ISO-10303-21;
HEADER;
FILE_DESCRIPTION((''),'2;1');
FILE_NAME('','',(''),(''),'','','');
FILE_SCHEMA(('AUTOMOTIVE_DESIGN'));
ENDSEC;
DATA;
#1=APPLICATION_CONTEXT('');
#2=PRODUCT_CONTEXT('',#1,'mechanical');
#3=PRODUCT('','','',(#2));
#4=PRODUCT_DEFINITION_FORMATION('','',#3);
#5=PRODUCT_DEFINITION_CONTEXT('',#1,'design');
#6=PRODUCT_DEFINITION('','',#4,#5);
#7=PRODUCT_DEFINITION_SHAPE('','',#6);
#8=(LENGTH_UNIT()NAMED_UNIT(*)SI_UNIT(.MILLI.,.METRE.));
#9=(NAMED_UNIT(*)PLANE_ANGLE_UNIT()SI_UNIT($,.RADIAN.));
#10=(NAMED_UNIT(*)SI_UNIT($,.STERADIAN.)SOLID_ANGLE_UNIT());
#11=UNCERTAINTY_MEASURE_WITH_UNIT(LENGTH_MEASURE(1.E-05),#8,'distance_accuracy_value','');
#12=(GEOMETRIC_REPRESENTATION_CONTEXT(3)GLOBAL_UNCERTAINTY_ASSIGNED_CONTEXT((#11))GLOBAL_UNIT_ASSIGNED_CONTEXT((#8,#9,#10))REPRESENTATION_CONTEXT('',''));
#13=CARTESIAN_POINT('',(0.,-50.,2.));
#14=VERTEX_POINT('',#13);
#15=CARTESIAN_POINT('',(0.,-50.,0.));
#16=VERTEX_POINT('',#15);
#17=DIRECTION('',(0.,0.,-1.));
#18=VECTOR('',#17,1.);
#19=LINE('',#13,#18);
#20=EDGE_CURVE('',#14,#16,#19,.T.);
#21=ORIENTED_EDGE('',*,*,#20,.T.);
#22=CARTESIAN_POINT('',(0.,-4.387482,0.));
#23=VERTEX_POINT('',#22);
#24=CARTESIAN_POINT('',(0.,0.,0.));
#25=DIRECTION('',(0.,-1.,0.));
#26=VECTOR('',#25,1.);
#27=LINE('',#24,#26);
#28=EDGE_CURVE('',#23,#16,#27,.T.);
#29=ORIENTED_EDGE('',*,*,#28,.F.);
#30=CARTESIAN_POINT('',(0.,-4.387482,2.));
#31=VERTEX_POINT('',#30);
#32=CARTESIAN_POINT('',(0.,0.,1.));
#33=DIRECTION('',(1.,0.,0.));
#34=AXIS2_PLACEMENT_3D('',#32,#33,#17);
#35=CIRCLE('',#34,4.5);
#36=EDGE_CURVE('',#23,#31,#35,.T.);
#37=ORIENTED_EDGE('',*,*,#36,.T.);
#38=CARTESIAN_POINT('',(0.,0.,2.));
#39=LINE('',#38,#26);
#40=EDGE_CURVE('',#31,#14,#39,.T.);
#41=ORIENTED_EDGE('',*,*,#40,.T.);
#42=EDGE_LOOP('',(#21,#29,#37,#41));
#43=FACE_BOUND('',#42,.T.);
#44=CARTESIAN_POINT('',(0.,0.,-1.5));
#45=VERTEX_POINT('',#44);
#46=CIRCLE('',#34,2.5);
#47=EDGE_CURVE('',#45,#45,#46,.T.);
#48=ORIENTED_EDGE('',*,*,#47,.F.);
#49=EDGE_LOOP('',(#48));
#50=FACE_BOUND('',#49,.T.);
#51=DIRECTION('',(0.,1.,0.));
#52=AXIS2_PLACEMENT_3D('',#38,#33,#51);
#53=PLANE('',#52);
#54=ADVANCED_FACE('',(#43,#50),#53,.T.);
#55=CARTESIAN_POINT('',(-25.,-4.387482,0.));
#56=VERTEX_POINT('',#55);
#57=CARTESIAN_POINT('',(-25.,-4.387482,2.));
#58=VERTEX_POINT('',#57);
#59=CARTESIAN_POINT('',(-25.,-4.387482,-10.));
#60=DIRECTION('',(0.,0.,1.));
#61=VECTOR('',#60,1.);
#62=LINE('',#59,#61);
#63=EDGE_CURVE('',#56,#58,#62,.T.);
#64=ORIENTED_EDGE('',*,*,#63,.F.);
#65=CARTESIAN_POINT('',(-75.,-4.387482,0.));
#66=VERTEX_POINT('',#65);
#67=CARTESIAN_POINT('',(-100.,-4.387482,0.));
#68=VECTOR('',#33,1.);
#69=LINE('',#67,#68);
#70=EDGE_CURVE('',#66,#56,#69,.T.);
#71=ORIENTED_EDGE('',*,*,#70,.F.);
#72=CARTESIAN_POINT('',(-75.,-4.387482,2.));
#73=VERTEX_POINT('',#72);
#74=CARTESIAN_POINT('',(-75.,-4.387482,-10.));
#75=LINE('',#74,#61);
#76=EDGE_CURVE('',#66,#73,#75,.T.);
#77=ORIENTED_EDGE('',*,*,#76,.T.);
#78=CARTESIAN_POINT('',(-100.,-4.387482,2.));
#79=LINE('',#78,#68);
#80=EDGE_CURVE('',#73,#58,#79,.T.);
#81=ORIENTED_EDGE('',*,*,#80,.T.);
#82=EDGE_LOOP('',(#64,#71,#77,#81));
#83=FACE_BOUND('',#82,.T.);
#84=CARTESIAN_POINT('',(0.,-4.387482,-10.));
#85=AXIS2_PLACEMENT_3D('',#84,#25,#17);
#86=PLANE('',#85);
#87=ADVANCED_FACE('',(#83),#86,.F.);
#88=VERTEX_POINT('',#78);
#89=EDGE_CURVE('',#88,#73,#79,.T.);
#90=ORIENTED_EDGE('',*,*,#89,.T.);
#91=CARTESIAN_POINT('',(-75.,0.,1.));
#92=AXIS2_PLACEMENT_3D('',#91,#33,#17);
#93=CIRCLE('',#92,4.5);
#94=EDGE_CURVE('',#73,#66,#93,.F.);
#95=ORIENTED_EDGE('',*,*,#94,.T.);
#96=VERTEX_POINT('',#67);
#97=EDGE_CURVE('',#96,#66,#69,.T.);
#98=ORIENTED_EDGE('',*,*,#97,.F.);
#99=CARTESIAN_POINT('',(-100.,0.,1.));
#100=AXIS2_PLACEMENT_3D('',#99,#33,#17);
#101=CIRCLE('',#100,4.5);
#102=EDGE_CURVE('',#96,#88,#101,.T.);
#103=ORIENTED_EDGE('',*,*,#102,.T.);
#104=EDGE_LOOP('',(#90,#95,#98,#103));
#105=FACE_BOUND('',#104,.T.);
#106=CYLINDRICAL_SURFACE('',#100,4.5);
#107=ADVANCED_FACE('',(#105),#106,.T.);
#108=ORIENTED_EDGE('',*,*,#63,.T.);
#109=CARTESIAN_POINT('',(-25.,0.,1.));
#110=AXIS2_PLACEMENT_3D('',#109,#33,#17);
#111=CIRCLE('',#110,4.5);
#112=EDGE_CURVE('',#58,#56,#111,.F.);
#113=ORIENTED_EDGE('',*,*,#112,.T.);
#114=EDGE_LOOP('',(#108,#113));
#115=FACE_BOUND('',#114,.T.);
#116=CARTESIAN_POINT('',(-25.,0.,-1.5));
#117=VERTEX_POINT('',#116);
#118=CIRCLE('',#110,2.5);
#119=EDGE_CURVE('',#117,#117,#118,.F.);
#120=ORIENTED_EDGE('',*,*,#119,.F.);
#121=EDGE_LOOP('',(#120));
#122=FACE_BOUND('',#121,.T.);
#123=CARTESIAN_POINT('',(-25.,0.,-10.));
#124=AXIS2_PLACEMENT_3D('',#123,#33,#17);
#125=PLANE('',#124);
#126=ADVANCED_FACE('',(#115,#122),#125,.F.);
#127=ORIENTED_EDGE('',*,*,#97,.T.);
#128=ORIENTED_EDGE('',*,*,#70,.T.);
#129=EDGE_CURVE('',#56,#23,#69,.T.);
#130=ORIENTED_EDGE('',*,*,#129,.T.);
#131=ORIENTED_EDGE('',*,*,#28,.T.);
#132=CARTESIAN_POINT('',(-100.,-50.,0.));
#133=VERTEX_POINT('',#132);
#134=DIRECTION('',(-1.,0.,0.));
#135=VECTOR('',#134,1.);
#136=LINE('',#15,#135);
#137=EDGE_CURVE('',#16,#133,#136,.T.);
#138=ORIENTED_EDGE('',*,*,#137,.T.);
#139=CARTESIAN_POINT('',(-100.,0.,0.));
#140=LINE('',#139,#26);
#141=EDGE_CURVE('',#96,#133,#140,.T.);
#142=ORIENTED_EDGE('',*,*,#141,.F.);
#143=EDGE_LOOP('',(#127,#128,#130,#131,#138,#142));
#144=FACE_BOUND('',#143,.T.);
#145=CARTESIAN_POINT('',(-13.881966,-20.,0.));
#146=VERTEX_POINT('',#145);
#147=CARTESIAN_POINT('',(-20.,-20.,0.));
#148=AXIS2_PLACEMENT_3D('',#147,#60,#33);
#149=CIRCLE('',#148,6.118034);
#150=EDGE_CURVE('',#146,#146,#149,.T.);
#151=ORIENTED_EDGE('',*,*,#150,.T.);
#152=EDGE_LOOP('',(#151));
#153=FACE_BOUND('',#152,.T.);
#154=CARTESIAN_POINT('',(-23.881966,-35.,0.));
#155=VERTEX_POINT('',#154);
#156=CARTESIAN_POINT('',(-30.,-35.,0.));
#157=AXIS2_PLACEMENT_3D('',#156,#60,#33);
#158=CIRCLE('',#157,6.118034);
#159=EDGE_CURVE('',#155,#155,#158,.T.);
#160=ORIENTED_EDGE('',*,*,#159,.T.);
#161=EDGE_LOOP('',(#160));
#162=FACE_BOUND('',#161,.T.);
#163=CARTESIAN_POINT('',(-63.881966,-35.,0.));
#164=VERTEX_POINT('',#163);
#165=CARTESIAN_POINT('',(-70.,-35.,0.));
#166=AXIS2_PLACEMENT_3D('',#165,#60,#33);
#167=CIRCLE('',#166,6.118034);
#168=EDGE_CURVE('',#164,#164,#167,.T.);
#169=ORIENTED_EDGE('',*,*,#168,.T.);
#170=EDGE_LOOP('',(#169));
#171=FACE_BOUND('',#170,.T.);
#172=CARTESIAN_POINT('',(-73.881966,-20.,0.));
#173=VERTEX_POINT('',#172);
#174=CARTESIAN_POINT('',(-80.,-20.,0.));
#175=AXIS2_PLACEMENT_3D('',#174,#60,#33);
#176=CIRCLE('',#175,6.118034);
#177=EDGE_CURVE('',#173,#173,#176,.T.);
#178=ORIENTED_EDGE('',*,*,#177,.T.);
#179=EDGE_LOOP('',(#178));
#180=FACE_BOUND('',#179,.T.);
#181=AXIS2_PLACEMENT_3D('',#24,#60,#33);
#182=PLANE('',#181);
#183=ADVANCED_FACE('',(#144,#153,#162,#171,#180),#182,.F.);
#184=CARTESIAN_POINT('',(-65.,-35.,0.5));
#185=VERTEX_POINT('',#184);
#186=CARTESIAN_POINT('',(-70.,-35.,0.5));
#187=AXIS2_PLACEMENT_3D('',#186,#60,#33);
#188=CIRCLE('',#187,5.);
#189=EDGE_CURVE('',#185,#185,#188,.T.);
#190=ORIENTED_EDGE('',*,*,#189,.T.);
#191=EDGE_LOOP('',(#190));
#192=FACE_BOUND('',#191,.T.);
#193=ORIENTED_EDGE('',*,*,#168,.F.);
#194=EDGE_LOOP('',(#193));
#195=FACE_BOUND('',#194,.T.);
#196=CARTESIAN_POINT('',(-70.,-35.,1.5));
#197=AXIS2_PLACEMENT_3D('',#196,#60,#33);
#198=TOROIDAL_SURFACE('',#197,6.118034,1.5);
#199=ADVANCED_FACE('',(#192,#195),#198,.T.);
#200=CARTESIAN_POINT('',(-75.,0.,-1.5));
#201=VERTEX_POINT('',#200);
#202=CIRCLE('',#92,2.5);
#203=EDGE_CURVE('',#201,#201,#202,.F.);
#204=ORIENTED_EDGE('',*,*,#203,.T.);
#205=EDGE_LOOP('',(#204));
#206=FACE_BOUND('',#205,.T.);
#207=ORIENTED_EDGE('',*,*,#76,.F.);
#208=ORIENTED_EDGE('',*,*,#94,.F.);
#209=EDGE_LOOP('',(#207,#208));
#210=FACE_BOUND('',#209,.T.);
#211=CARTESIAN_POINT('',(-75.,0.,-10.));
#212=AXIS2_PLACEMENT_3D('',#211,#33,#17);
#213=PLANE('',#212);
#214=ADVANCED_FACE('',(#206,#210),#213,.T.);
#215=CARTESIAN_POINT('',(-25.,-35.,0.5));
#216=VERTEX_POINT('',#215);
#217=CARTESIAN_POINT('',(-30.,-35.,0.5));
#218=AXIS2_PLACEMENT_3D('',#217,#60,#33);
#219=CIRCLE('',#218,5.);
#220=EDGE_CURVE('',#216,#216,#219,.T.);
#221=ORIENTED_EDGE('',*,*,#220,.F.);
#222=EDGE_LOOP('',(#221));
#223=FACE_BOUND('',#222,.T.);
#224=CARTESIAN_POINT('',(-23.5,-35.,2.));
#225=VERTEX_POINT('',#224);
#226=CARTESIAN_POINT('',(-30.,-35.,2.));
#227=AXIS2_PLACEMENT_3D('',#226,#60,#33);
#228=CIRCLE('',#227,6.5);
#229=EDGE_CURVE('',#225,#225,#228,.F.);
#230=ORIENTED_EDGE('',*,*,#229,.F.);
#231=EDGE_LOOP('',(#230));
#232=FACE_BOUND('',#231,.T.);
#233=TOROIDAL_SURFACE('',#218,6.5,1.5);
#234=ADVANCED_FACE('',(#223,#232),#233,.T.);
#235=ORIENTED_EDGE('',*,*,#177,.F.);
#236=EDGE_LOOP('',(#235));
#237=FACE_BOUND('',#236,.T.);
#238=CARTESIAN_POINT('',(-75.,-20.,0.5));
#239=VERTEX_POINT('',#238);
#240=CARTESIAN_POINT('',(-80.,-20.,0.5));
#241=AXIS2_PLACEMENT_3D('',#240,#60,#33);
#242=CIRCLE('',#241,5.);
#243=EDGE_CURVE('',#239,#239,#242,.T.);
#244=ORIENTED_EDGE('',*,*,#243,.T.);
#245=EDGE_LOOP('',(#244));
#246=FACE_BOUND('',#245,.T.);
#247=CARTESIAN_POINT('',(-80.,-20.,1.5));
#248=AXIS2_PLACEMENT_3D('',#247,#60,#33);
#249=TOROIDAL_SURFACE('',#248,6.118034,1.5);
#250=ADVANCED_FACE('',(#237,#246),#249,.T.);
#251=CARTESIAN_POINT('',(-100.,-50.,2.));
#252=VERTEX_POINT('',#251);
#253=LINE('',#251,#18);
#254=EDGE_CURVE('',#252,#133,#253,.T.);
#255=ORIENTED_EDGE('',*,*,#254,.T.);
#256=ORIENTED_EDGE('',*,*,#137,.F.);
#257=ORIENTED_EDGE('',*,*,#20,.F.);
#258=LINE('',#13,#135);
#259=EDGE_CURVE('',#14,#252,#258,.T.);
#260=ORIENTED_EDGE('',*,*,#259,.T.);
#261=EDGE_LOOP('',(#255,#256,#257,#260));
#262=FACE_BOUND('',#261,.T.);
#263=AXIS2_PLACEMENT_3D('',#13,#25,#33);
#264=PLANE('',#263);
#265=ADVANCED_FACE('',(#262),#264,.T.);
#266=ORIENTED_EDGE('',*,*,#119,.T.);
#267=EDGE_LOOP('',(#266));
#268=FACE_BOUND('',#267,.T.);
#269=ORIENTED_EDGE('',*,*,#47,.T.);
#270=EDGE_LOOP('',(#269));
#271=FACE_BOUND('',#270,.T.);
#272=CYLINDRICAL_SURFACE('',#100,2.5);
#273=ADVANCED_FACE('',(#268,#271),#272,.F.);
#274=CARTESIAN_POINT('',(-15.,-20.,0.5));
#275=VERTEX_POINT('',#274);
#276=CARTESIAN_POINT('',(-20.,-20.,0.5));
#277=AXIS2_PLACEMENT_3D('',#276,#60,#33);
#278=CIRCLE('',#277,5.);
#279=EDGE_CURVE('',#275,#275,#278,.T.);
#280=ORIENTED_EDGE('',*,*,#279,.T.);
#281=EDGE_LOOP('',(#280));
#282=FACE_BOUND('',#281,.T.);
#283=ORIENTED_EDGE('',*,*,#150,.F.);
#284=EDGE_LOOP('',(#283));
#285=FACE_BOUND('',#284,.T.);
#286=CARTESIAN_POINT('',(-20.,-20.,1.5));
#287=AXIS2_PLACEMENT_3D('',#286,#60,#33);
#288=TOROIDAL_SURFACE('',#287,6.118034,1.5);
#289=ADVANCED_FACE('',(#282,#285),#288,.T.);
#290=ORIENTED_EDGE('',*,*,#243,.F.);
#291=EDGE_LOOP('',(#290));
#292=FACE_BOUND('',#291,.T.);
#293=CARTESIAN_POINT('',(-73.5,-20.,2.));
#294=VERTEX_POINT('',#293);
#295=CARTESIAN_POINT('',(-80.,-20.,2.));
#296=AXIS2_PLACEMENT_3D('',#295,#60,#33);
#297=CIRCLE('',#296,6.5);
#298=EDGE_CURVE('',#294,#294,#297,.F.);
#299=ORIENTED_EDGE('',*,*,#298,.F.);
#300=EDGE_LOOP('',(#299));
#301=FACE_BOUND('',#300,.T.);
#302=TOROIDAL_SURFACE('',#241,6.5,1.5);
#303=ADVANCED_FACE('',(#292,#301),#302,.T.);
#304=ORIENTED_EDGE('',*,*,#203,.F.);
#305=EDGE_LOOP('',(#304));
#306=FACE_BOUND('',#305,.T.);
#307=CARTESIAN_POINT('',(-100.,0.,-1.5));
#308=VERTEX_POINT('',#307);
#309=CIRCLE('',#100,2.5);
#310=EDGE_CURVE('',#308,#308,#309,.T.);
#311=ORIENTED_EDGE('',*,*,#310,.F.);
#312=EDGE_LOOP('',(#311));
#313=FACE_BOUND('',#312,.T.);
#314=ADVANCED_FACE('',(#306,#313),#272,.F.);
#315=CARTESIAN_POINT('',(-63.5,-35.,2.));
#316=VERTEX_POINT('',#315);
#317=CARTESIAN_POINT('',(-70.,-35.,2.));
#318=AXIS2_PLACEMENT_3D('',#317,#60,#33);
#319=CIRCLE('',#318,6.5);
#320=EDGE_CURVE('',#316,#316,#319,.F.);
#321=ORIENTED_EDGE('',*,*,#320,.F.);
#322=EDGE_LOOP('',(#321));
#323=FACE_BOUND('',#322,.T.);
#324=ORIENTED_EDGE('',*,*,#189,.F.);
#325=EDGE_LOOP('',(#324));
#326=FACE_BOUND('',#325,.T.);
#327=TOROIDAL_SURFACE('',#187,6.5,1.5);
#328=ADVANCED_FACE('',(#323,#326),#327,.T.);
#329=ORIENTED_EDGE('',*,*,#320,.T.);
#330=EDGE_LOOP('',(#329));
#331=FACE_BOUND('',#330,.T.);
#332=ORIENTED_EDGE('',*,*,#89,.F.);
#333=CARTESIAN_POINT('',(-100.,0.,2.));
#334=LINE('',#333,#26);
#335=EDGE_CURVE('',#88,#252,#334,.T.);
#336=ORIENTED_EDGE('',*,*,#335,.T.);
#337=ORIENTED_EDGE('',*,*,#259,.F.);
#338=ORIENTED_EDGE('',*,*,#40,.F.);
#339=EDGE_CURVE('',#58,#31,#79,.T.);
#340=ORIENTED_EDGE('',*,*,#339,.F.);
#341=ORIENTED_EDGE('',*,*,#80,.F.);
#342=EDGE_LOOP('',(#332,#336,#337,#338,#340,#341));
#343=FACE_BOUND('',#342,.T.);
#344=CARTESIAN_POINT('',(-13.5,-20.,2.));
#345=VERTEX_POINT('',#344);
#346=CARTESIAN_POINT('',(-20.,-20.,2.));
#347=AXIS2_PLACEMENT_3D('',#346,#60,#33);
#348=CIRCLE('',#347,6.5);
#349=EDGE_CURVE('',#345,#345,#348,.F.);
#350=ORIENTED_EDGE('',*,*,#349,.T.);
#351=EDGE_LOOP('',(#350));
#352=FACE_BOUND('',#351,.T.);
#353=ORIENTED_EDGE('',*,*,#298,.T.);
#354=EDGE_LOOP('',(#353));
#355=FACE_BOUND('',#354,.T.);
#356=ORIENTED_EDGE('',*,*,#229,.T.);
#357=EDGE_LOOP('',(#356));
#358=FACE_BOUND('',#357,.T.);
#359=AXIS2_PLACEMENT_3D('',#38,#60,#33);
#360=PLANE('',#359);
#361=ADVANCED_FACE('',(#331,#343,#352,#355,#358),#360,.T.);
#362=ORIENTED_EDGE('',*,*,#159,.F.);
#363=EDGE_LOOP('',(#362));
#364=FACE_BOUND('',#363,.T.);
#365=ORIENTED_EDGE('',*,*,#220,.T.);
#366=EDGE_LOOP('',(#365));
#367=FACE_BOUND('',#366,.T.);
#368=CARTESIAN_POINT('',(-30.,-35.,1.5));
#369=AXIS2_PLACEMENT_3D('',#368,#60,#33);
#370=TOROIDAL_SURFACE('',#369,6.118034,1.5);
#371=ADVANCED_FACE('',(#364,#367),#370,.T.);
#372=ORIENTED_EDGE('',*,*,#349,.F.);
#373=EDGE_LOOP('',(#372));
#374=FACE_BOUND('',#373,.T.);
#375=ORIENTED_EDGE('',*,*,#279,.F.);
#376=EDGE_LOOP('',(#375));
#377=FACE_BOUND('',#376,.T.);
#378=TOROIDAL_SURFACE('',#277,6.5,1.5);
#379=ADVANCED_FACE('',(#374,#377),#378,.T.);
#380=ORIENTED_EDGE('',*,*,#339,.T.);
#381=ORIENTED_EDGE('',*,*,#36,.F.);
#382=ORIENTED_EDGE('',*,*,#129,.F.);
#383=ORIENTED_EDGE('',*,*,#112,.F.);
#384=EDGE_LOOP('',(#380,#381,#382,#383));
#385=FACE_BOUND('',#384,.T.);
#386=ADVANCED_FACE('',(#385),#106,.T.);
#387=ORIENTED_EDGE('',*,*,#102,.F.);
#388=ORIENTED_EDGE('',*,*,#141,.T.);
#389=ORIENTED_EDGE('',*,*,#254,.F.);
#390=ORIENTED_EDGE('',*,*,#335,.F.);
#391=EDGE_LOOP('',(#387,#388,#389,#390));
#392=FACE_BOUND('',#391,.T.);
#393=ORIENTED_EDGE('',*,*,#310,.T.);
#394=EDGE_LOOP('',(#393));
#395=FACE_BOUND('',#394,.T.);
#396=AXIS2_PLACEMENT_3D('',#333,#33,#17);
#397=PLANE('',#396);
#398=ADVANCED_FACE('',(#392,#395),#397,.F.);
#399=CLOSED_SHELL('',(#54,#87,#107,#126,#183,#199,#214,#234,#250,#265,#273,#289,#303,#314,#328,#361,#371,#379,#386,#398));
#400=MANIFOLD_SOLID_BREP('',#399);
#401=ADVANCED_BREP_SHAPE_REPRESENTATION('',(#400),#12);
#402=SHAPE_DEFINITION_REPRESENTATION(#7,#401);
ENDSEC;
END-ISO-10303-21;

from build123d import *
from build123d.topology import SkipClean

# Parameters (mm, degrees)
ESBO_O1_W                  = 100
ESBO_O1_H                  = 50
ESBO_O1_R                  = 5
RESSALTO_EXTRUS_O1_DEPTH   = 2
FILETE1_R                  = 1.5
FILETE2_R                  = 1.5
ESBO_O2_R                  = 4.5
ESBO_O2_R_2                = 2.5
RESSALTO_EXTRUS_O2_DEPTH   = 100
CORTE_EXTRUS_O1_DEPTH      = 112.938599241
CORTE_EXTRUS_O2_DEPTH      = 10
CORTE_EXTRUS_O2_DEPTH_BACK = 112.938599241
ESBO_O4_W                  = 50
ESBO_O4_H                  = 20


with BuildPart() as part:
    # Esboço1 → Ressalto-extrusão1 (new body)
    with BuildSketch(Plane.XY):
        with Locations((-50, -25)):
            Rectangle(ESBO_O1_W, ESBO_O1_H)
        with Locations((-30, -35)):
            Circle(ESBO_O1_R, mode=Mode.SUBTRACT)
        with Locations((-80, -20)):
            Circle(ESBO_O1_R, mode=Mode.SUBTRACT)
        with Locations((-70, -35)):
            Circle(ESBO_O1_R, mode=Mode.SUBTRACT)
        with Locations((-20, -20)):
            Circle(ESBO_O1_R, mode=Mode.SUBTRACT)
    extrude(amount=RESSALTO_EXTRUS_O1_DEPTH)

    # Filete1
    filete1_edges = [part.edges().sort_by_distance(p)[0] for p in [
        (-75, -35, 2),
        (-85, -20, 2),
        (-35, -35, 2),
        (-25, -20, 2),
    ]]
    fillet(filete1_edges, radius=FILETE1_R)

    # Filete2
    # the kernel refuses this fillet: 1.5 mm, written as the material it takes off along each edge
    with BuildSketch(Plane(origin=(-30, -35, 0), x_dir=(1, 0, 0), z_dir=(0, -1, 0))) as filete2_piece_1:
        with BuildLine():
            CenterArc((6.118033989, 1.5), FILETE2_R, 221.810314896, 48.189685104)
            Line((6.118033989, 0), (6.118033989, -0.03))
            Line((6.118033989, -0.03), (5, -0.03))
            Line((5, -0.03), (4.97, 0))
            ThreePointArc((4.97, 0), (4.97, 0.25), (4.97763932, 0.48))
            Line((4.97763932, 0.48), (5, 0.5))
        make_face()
    revolve(axis=Axis((-30, -35, 0), (0, 0, 1)), mode=Mode.SUBTRACT)
    with BuildSketch(Plane(origin=(-80, -20, 0), x_dir=(1, 0, 0), z_dir=(0, -1, 0))) as filete2_piece_2:
        with BuildLine():
            CenterArc((6.118033989, 1.5), FILETE2_R, 221.810314896, 48.189685104)
            Line((5, 0.5), (4.97763932, 0.48))
            ThreePointArc((4.97763932, 0.48), (4.97, 0.25), (4.97, 0))
            Line((4.97, 0), (5, -0.03))
            Line((5, -0.03), (6.118033989, -0.03))
            Line((6.118033989, -0.03), (6.118033989, 0))
        make_face()
    revolve(axis=Axis((-80, -20, 0), (0, 0, 1)), mode=Mode.SUBTRACT)
    with BuildSketch(Plane(origin=(-70, -35, 0), x_dir=(1, 0, 0), z_dir=(0, -1, 0))) as filete2_piece_3:
        with BuildLine():
            CenterArc((6.118033989, 1.5), FILETE2_R, 221.810314896, 48.189685104)
            Line((5, 0.5), (4.97763932, 0.48))
            ThreePointArc((4.97763932, 0.48), (4.97, 0.25), (4.97, 0))
            Line((4.97, 0), (5, -0.03))
            Line((5, -0.03), (6.118033989, -0.03))
            Line((6.118033989, -0.03), (6.118033989, 0))
        make_face()
    revolve(axis=Axis((-70, -35, 0), (0, 0, 1)), mode=Mode.SUBTRACT)
    with BuildSketch(Plane(origin=(-20, -20, 0), x_dir=(1, 0, 0), z_dir=(0, -1, 0))) as filete2_piece_4:
        with BuildLine():
            CenterArc((6.118033989, 1.5), FILETE2_R, 221.810314896, 48.189685104)
            Line((5, 0.5), (4.97763932, 0.48))
            ThreePointArc((4.97763932, 0.48), (4.97, 0.25), (4.97, 0))
            Line((4.97, 0), (5, -0.03))
            Line((5, -0.03), (6.118033989, -0.03))
            Line((6.118033989, -0.03), (6.118033989, 0))
        make_face()
    revolve(axis=Axis((-20, -20, 0), (0, 0, 1)), mode=Mode.SUBTRACT)

    # Esboço2 → Ressalto-extrusão2 (add, through all)
    with BuildSketch(Plane(origin=(0, 0, 0), x_dir=(0, 0, -1), z_dir=(1, 0, 0))):
        with Locations((-1, 0)):
            Circle(ESBO_O2_R)
        with Locations((-1, 0)):
            Circle(ESBO_O2_R_2, mode=Mode.SUBTRACT)
    extrude(amount=-RESSALTO_EXTRUS_O2_DEPTH)

    # Esboço3 → Corte-extrusão1 (cut, through all)
    with SkipClean():  # the faces are left unmerged after this step: merging them gives an invalid solid
        with BuildSketch(Plane(origin=(0, 0, 0), x_dir=(0, 0, -1), z_dir=(1, 0, 0))):
            with BuildLine():
                Line((-2, 0), (-2, -2.291287847))
                ThreePointArc((-2, -2.291287847), (-1, 2.5), (0, -2.291287847))
                Line((0, -2.291287847), (0, 0))
                Line((0, 0), (-2, 0))
            make_face()
            with BuildLine():
                Line((0, 0), (0, -2.291287847))
                ThreePointArc((0, -2.291287847), (1.091650066, -1.369306394), (1.5, 0))
                ThreePointArc((1.5, 0), (-2.369306394, 2.091650066), (-2, -2.291287847))
                Line((-2, -2.291287847), (-2, 0))
                Line((-2, 0), (0, 0))
            make_face()
            with BuildLine():
                ThreePointArc((-2, -2.291287847), (-1, -2.5), (0, -2.291287847))
                Line((0, -2.291287847), (0, 0))
                Line((0, 0), (-2, 0))
                Line((-2, 0), (-2, -2.291287847))
            make_face()
        extrude(amount=-CORTE_EXTRUS_O1_DEPTH, mode=Mode.SUBTRACT)

    # Esboço4 → Corte-extrusão2 (cut, two sides: drawn at the far end of the back side and taken through both)
    with BuildSketch(Plane(origin=(0, 0, 0), x_dir=(-1, 0, 0), z_dir=(0, 0, -1)).offset(-CORTE_EXTRUS_O2_DEPTH_BACK)):
        with Locations((50, 5.612517806)):
            Rectangle(ESBO_O4_W, ESBO_O4_H)
    extrude(amount=CORTE_EXTRUS_O2_DEPTH + CORTE_EXTRUS_O2_DEPTH_BACK, mode=Mode.SUBTRACT)


solid = part.part
